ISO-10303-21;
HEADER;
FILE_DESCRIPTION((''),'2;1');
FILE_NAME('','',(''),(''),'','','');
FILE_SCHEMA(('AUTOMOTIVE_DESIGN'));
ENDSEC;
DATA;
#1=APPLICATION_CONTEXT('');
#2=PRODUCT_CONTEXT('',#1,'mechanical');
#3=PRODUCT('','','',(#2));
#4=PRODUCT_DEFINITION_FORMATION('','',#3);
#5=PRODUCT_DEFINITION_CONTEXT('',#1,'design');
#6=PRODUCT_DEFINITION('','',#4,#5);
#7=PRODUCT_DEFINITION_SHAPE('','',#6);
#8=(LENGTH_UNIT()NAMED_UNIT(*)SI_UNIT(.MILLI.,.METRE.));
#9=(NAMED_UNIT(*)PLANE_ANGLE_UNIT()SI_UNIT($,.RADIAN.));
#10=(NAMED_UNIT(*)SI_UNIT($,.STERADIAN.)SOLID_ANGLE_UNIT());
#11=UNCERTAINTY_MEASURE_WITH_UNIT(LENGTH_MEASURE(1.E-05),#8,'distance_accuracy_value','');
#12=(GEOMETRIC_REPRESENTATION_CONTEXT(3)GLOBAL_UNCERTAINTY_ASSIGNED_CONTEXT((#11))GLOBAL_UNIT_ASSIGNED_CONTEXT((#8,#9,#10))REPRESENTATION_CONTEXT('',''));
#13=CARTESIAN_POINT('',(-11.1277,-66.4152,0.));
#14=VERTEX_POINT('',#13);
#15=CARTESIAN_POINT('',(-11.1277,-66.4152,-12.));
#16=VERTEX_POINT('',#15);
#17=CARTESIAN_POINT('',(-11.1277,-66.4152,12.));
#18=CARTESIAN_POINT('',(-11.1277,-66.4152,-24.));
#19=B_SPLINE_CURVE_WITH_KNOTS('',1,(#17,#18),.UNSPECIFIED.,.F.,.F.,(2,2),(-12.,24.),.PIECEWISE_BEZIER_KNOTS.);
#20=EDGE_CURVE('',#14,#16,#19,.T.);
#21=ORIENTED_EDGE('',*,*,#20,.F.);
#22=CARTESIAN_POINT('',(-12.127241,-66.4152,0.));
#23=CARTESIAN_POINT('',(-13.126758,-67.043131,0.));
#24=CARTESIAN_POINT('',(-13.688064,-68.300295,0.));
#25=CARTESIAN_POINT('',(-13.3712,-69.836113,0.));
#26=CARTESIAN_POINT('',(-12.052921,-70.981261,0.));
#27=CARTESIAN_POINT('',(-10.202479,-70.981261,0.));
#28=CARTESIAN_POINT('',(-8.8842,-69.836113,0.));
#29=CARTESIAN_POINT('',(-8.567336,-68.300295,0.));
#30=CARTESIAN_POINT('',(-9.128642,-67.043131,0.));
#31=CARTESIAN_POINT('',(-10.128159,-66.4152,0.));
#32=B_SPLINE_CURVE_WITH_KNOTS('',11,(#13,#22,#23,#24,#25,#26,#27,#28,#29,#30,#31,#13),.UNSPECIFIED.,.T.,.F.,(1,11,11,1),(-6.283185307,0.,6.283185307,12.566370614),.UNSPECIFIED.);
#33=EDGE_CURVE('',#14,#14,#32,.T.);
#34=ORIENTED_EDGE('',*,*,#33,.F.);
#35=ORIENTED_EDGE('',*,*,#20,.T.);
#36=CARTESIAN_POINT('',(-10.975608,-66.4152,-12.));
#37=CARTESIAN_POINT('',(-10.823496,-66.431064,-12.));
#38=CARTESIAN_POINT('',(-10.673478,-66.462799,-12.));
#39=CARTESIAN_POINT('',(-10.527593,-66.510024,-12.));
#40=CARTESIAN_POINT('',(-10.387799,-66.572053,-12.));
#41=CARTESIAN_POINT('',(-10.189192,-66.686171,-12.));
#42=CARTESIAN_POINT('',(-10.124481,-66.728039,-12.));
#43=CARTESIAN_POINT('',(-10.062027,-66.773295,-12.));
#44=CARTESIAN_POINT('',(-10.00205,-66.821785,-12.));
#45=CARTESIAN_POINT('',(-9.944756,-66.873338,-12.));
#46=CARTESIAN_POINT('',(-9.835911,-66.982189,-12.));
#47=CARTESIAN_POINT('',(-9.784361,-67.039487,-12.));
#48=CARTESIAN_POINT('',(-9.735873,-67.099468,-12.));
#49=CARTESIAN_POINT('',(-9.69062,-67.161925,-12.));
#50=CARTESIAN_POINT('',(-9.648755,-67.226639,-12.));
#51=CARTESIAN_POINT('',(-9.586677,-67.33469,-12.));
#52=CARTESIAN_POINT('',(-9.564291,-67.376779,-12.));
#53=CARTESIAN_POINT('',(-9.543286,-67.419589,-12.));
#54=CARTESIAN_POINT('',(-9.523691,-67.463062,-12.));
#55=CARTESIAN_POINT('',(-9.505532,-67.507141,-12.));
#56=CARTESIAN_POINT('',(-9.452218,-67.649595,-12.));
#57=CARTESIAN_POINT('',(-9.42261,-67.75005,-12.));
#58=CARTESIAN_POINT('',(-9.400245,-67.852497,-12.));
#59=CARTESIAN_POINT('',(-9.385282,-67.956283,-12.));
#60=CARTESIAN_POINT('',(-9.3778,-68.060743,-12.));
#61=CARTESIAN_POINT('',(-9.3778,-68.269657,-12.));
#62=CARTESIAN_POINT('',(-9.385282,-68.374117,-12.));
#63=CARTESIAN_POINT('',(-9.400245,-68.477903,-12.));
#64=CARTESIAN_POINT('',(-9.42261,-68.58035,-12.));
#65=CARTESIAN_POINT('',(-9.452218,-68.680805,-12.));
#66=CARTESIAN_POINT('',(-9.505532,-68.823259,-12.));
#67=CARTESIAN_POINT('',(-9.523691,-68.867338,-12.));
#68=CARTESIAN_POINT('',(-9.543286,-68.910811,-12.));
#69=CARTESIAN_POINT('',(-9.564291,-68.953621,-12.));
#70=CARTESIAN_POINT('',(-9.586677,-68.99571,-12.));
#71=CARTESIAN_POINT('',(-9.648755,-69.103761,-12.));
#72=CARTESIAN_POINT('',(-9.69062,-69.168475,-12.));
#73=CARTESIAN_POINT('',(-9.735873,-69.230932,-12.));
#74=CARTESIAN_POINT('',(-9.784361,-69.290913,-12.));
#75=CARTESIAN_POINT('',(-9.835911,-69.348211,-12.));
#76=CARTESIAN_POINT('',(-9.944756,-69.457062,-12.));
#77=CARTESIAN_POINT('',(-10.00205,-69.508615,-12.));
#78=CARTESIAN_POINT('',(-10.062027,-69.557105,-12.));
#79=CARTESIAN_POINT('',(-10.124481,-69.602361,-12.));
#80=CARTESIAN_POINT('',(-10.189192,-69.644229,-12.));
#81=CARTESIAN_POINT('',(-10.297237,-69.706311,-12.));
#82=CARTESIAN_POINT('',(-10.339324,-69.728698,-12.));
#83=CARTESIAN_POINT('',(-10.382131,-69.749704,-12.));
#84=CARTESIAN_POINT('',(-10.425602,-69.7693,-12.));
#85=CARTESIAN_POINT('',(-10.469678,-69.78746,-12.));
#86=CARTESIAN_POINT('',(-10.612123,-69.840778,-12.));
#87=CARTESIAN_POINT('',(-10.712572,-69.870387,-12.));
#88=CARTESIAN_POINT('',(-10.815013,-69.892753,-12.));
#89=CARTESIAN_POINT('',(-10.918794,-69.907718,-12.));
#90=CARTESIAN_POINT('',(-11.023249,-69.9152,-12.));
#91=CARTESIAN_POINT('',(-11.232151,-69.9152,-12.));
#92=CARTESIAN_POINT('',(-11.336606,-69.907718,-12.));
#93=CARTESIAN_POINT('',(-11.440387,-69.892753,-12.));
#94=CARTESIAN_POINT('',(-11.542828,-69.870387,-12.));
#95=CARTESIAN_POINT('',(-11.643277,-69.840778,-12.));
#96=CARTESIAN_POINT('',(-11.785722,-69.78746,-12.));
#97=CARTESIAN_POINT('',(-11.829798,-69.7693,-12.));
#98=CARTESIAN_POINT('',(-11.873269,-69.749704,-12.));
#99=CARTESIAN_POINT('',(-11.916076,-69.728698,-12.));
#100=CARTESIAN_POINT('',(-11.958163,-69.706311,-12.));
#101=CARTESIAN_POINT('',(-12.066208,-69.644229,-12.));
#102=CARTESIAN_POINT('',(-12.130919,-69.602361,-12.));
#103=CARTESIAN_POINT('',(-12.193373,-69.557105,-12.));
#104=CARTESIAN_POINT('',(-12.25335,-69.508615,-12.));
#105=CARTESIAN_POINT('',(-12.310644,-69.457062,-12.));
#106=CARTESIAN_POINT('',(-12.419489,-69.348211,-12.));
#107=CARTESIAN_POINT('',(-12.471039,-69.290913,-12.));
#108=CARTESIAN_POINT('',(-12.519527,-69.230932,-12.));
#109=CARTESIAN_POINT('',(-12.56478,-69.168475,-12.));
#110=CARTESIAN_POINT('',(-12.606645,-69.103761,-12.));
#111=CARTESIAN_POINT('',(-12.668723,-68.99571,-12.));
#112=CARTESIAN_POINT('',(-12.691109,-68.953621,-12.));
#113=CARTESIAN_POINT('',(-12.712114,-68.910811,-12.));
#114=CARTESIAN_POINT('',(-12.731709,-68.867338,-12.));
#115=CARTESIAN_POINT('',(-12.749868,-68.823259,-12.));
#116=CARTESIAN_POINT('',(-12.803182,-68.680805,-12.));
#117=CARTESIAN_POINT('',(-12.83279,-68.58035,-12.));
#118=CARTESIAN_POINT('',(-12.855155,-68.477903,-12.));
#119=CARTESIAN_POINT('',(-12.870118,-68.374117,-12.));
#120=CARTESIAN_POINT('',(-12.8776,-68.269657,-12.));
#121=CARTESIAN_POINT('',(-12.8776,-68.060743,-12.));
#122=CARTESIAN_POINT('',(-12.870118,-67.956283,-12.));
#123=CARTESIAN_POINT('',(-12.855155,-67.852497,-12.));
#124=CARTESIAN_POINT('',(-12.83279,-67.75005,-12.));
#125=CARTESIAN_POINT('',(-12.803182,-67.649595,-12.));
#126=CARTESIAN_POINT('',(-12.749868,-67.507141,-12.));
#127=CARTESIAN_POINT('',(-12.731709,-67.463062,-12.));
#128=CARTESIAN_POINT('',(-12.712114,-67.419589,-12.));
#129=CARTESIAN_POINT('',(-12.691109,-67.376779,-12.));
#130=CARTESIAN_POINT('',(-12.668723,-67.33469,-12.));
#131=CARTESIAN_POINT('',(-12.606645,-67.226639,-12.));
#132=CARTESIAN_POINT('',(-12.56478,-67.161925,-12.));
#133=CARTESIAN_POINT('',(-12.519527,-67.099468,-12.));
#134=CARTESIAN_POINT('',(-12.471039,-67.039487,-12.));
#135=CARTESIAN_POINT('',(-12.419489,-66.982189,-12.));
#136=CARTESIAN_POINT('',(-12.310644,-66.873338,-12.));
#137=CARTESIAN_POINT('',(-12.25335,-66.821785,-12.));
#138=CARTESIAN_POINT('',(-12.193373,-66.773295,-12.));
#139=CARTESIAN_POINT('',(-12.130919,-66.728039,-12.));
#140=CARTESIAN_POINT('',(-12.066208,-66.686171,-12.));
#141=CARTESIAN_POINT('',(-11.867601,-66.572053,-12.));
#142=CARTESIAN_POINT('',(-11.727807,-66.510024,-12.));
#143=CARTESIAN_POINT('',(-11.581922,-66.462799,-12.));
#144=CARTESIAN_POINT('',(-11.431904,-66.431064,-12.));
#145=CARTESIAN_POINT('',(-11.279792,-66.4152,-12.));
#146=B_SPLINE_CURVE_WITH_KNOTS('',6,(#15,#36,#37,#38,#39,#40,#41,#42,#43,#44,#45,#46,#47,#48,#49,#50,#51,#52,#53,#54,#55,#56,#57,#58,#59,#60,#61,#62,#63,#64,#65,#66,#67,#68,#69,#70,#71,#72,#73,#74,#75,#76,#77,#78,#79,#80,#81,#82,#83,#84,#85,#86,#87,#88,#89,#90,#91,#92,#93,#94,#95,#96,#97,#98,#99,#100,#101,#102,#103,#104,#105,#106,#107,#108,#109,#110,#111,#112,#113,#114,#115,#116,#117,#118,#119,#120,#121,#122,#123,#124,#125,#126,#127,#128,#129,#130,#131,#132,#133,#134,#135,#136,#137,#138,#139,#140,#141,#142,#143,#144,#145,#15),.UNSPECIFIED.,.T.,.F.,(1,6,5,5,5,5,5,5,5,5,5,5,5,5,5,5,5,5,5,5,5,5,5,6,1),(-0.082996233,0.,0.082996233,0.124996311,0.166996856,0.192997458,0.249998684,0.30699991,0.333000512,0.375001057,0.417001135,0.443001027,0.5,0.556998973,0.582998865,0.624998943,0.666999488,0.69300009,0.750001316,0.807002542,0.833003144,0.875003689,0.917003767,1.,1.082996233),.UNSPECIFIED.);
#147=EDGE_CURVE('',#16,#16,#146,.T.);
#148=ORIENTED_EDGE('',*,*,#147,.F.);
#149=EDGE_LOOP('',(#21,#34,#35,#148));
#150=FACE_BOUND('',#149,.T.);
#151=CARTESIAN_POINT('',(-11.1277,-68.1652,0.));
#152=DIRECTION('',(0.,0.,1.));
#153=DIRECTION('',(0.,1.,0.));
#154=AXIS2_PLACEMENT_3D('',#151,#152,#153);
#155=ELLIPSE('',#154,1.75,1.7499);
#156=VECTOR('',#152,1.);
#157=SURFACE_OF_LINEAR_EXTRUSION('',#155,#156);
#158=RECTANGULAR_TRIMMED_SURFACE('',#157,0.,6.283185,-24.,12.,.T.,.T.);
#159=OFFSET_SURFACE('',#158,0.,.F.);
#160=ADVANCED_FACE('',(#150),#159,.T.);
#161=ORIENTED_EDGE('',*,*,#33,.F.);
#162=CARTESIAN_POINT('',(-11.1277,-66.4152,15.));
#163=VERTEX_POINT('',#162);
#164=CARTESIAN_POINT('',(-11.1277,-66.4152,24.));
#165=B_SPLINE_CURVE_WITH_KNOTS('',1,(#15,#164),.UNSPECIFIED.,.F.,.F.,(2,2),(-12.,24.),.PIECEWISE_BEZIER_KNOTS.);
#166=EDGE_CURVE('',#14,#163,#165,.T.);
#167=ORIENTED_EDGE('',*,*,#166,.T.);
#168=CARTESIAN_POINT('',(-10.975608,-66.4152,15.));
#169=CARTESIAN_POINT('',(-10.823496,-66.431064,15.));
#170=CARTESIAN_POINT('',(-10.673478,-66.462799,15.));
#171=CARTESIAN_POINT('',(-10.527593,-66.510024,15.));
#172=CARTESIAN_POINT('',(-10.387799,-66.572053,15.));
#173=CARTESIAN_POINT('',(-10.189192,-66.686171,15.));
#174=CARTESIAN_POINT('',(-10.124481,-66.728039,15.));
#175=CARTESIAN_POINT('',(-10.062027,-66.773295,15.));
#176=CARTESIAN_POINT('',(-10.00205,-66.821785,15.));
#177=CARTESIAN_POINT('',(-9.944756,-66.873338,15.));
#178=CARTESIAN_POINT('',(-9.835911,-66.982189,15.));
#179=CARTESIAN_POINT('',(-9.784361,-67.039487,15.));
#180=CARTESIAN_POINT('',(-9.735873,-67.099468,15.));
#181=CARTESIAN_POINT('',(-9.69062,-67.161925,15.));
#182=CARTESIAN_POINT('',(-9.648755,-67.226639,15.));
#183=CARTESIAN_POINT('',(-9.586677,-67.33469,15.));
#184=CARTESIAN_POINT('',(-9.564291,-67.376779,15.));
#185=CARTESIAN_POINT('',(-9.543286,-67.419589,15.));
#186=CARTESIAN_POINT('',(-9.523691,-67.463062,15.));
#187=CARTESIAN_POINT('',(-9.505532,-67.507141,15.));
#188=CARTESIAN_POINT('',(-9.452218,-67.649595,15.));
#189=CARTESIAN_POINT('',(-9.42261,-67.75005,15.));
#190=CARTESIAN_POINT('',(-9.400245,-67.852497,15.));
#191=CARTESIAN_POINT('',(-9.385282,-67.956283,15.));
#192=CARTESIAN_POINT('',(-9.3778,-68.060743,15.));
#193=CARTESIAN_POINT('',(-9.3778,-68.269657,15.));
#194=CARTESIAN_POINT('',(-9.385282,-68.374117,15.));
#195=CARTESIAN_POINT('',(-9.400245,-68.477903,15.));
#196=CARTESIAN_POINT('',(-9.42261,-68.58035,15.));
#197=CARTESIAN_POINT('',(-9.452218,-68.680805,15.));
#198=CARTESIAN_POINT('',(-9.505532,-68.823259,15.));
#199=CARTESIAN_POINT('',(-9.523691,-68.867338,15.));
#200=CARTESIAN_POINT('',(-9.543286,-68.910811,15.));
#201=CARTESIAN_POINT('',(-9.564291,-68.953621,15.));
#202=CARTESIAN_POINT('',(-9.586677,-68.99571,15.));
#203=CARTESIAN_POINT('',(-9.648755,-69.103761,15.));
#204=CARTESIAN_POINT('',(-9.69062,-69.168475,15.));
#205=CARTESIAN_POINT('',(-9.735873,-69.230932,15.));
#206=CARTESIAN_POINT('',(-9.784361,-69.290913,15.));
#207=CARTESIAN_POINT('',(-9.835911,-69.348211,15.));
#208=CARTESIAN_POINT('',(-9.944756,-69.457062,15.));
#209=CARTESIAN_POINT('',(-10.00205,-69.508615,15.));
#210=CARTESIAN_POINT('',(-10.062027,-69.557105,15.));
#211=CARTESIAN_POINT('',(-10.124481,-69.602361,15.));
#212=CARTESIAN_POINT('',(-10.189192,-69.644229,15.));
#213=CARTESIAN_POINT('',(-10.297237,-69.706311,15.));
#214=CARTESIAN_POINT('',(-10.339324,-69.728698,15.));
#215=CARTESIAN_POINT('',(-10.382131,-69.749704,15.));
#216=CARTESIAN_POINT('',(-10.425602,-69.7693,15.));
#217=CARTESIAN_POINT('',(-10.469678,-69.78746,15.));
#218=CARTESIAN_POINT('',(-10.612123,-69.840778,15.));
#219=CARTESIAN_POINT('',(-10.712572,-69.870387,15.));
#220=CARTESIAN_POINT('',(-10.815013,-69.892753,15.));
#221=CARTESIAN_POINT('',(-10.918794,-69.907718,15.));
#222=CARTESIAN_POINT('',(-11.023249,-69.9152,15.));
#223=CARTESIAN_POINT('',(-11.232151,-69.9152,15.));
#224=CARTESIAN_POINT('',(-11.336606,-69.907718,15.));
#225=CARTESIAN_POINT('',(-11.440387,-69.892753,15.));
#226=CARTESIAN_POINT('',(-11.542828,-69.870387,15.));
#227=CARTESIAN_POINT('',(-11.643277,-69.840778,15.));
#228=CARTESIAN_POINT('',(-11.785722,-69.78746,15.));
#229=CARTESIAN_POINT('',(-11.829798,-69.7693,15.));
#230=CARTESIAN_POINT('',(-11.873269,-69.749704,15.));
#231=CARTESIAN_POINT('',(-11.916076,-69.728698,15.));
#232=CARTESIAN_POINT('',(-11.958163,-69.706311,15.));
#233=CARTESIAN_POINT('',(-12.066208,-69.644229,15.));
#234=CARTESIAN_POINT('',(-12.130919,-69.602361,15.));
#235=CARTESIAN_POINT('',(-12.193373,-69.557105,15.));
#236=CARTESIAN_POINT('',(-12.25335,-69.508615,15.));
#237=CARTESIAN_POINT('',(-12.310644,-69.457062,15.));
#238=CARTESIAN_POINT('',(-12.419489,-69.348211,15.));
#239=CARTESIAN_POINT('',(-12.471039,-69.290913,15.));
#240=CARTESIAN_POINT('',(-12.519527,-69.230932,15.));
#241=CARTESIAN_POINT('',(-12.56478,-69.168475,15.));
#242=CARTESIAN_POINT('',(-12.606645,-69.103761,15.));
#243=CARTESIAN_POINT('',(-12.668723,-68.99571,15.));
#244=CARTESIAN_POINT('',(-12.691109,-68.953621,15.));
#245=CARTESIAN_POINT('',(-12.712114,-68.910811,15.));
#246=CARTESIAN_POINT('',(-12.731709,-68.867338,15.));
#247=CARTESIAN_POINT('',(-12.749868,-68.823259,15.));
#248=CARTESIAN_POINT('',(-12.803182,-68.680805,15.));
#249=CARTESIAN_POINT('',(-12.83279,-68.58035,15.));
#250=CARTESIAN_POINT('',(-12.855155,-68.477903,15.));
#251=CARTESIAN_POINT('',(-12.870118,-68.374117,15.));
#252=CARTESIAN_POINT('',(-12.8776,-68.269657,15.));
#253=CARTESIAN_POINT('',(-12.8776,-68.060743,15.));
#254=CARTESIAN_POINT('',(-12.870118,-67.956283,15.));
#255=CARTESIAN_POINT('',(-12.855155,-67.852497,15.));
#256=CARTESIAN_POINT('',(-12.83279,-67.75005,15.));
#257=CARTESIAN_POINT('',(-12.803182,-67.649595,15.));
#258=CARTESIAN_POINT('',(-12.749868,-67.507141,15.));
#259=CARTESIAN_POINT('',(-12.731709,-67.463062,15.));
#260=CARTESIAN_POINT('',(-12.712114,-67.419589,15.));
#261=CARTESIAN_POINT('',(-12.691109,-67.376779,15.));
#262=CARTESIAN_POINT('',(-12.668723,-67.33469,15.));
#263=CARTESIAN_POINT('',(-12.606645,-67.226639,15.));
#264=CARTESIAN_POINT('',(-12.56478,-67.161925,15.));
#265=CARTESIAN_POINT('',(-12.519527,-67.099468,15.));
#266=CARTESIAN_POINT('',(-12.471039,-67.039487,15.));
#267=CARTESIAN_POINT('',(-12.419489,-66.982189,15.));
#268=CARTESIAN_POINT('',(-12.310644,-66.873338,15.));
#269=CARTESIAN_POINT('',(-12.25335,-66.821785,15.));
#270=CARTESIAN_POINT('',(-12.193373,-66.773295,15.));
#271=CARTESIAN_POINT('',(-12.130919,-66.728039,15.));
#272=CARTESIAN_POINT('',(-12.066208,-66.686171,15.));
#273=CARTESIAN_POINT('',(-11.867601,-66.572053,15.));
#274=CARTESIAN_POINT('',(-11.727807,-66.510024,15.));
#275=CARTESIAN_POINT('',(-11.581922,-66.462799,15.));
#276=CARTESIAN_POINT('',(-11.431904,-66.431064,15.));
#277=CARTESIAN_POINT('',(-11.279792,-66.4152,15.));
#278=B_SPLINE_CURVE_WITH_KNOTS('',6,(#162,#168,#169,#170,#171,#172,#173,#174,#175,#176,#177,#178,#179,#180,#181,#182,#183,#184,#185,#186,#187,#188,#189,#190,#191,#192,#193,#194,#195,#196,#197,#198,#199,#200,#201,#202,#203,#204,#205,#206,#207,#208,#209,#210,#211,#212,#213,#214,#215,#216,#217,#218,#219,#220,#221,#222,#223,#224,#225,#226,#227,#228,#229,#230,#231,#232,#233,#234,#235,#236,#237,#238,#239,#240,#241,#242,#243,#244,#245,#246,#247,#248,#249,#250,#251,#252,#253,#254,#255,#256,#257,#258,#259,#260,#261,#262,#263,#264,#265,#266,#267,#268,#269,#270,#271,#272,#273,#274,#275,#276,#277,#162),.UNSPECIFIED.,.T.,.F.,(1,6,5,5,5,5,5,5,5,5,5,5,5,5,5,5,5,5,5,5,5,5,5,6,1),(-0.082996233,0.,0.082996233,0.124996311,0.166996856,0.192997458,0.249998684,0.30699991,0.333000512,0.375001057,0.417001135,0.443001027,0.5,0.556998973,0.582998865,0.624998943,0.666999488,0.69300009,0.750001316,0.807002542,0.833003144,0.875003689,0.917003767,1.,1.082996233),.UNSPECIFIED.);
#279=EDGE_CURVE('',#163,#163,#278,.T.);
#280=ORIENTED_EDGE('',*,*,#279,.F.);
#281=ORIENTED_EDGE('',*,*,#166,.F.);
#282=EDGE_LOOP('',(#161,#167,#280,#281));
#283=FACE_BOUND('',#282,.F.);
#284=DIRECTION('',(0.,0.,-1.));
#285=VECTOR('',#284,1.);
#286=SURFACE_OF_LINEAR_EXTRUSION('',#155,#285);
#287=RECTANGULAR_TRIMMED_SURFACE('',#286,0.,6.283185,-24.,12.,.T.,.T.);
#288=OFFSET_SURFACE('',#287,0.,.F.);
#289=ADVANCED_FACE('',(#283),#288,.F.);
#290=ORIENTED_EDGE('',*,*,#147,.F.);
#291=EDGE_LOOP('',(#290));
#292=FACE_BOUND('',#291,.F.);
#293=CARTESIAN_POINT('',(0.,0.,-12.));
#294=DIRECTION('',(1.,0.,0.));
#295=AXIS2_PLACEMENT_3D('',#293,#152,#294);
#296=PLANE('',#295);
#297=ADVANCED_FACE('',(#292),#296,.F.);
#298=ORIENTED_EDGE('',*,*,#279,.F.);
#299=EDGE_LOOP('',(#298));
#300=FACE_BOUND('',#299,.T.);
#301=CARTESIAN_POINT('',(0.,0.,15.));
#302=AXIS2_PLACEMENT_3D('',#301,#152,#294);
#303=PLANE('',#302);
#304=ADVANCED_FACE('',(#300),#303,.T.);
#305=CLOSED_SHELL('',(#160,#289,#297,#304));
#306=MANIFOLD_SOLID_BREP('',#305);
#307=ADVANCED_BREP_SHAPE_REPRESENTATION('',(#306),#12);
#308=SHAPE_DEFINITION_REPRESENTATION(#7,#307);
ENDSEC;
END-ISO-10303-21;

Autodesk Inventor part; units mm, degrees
ref_plane "YZ Plane" through (0, 0, 0) normal (1, 0, 0) x (0, 1, 0)
ref_plane "XZ Plane" through (0, 0, 0) normal (0, 1, 0) x (-1, 0, 0)
ref_plane "XY Plane" through (0, 0, 0) normal (0, 0, 1) x (1, 0, 0)
sketch "Sketch1" plane through (0, 0, 0) normal (0, 0, 1) x (1, 0, 0)
  ellipse E0 centre (-11.1277, -68.1652) end of major axis (-11.1277, -66.4152) minor radius 1.7499
  point P0 (0, 0)
extrude "Extrusion1" add sketch "Sketch1" along normal mid plane 24
thicken "Thicken1" operation add thickness 3 both sides no extend neighbours yes toward (0, 0, 1) faces at (-11.7054, -68.0995, 12)
properties part number "knapp"
